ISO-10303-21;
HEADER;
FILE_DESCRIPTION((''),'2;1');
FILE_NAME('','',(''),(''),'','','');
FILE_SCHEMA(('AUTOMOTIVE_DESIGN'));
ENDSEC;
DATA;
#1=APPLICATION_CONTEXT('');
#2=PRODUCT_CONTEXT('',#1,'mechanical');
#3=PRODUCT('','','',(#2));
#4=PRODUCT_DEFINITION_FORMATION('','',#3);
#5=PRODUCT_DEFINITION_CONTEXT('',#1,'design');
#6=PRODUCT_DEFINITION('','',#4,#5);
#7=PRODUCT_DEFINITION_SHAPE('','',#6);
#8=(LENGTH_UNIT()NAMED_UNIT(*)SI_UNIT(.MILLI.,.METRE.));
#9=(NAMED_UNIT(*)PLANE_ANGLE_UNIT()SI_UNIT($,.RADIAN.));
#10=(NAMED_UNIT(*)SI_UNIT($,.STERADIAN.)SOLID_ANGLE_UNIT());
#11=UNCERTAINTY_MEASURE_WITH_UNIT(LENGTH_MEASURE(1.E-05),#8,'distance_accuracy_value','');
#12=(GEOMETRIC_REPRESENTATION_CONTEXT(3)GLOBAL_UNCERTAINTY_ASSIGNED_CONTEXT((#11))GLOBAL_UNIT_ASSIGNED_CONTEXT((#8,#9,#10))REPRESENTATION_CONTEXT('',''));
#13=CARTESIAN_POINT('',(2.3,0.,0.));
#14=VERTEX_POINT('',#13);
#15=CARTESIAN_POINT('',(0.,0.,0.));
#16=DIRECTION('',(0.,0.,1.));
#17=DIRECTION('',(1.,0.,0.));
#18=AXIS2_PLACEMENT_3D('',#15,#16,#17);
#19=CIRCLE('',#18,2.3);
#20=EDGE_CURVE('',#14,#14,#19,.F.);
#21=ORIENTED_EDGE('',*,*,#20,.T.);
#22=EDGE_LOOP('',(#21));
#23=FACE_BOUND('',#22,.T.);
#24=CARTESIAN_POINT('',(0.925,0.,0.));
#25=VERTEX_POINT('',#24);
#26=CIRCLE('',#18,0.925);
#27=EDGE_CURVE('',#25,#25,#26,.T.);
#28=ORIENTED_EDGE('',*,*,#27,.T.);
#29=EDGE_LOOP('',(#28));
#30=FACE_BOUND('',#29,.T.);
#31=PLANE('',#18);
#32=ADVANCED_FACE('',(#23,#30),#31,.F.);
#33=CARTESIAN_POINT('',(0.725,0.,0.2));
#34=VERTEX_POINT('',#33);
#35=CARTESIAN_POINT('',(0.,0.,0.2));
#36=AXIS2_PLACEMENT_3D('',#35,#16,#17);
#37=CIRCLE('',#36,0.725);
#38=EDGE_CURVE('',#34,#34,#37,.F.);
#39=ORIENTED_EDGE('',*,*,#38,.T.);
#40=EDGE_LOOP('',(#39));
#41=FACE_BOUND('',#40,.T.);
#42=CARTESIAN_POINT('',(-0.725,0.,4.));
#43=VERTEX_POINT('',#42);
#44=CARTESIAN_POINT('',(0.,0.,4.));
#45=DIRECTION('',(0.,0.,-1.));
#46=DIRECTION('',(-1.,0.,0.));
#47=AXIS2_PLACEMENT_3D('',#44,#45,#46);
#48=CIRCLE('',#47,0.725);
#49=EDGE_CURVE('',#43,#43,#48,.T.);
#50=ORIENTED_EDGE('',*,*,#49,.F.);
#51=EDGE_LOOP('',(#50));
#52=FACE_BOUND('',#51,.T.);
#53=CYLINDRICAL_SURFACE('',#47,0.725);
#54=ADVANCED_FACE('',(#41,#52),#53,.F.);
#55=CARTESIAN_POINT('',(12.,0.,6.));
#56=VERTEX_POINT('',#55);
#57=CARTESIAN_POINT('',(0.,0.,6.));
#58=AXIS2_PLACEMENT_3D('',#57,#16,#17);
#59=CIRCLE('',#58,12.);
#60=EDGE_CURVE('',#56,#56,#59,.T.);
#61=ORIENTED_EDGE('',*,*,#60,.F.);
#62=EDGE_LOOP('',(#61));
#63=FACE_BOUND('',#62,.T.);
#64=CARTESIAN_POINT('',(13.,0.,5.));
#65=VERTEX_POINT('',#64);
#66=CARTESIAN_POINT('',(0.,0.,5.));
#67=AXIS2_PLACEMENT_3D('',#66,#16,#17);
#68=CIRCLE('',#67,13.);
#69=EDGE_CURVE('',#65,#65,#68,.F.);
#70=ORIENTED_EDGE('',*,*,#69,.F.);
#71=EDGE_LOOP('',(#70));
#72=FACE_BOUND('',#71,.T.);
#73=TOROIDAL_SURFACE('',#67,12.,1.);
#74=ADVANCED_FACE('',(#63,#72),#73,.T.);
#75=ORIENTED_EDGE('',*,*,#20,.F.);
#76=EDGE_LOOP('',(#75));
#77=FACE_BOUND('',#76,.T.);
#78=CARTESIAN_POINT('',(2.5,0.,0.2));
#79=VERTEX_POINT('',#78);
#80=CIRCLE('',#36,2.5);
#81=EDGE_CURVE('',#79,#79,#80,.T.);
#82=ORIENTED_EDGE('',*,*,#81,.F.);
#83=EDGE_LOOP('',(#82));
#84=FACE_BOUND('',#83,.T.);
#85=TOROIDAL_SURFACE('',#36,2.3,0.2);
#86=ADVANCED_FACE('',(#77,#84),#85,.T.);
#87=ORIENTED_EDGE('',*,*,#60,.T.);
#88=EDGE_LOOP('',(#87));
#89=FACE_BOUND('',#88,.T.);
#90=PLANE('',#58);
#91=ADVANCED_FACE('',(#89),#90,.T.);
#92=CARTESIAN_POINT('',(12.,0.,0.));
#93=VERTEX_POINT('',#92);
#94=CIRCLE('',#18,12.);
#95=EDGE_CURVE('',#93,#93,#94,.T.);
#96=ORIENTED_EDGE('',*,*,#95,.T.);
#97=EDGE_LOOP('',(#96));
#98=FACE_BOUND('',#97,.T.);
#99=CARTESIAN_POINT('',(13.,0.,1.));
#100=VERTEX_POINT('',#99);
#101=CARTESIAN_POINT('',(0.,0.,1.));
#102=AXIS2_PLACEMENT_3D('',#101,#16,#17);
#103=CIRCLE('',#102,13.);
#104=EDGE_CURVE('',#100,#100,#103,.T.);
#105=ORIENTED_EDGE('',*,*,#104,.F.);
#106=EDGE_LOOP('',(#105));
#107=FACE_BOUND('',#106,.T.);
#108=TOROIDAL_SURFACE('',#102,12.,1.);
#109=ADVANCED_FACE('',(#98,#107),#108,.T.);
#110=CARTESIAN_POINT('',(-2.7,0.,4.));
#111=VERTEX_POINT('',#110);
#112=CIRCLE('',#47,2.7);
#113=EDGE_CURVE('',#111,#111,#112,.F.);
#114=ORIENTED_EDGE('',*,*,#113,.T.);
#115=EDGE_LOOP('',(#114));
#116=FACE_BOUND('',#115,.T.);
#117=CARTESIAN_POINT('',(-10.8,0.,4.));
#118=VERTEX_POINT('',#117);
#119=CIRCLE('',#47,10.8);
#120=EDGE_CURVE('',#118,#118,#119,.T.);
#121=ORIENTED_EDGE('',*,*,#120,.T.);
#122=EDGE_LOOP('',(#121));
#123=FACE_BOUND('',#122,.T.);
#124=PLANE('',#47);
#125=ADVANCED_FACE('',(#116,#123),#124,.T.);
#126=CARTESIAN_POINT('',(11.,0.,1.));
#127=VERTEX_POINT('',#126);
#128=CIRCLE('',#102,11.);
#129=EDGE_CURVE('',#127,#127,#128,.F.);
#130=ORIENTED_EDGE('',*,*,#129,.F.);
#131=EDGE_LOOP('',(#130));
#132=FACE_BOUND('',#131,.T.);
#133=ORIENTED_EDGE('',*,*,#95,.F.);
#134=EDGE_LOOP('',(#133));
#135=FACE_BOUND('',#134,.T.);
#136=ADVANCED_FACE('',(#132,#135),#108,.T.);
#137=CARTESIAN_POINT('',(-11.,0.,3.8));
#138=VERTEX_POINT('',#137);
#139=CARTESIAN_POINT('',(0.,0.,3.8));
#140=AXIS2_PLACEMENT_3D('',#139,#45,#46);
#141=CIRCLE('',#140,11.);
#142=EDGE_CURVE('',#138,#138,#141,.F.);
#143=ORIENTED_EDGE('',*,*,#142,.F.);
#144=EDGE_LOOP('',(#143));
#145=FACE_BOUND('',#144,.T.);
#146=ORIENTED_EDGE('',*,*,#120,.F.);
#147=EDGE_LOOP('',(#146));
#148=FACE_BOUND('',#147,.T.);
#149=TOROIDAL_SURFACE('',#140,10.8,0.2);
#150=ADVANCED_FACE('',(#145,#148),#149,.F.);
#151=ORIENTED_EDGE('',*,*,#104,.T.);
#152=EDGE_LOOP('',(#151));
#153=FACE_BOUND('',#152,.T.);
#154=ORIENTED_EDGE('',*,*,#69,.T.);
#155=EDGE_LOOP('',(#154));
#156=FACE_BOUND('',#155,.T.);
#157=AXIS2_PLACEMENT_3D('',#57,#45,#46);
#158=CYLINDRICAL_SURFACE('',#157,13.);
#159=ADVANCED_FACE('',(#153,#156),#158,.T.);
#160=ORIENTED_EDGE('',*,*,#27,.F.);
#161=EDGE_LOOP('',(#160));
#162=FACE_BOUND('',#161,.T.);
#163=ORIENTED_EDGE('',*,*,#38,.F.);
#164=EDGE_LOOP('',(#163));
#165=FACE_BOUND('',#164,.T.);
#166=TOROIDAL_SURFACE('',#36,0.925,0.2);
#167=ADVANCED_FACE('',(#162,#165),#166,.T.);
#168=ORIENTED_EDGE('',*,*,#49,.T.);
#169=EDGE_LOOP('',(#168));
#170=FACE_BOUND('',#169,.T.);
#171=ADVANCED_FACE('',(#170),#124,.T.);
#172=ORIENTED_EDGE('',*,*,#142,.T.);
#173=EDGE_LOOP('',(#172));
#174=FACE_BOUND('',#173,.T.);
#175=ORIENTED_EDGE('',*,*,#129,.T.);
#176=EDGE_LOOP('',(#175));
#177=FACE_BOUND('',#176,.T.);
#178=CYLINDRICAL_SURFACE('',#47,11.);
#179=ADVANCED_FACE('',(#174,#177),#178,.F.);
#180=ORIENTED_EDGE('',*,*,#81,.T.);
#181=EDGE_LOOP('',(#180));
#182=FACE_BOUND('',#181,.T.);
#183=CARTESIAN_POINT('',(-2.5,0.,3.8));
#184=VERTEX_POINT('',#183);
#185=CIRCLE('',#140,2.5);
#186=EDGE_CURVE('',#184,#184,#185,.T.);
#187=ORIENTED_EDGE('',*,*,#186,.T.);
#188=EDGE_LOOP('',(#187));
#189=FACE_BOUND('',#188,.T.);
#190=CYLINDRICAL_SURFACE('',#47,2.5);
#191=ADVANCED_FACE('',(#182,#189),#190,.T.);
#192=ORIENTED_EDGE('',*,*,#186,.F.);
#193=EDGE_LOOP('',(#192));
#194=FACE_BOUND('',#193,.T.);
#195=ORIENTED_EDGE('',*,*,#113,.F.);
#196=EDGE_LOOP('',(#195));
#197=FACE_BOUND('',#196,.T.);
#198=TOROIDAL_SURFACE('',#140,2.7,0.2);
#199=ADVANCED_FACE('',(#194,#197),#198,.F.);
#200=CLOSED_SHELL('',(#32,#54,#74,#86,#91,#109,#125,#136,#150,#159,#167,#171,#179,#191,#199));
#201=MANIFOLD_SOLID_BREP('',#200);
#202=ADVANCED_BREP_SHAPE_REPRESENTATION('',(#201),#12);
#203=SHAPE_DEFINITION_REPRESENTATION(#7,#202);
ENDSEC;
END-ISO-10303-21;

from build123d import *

# Parameters (mm, degrees)
SKETCH_1_R          = 13
EXTRUDE_1_DEPTH     = 6
SKETCH_2_R          = 0.725
CUT_EXTRUDE_1_DEPTH = 4
SKETCH_3_R          = 11
SKETCH_3_R_2        = 2.5
CUT_EXTRUDE_2_DEPTH = 4
FILLET_1_R          = 1
FILLET_2_R          = 1
FILLET_3_R          = 0.2
FILLET_4_R          = 0.2


with BuildPart() as part:
    # Эскиз1 → Бобышка-Вытянуть1 (new body)
    with BuildSketch(Plane.XY):
        Circle(SKETCH_1_R)
    extrude(amount=EXTRUDE_1_DEPTH)

    # Эскиз2 → Вырез-Вытянуть1 (cut)
    with BuildSketch(Plane(origin=(0, 0, 0), x_dir=(-1, 0, 0), z_dir=(0, 0, -1))):
        Circle(SKETCH_2_R)
    extrude(amount=-CUT_EXTRUDE_1_DEPTH, mode=Mode.SUBTRACT)

    # Эскиз3 → Вырез-Вытянуть2 (cut)
    with BuildSketch(Plane(origin=(0, 0, 0), x_dir=(-1, 0, 0), z_dir=(0, 0, -1))):
        Circle(SKETCH_3_R)
        Circle(SKETCH_3_R_2, mode=Mode.SUBTRACT)
    extrude(amount=-CUT_EXTRUDE_2_DEPTH, mode=Mode.SUBTRACT)

    # Скругление1
    fillet_1_edges = [part.edges().sort_by_distance(p)[0] for p in [
        (11, 0, 0),
        (-13, 0, 0),
    ]]
    fillet(fillet_1_edges, radius=FILLET_1_R - 0.0001)  # a hair under: the kernel refuses the full size

    # Скругление2
    fillet_2_edges = [part.edges().sort_by_distance(p)[0] for p in [
        (-13, 0, 6),
    ]]
    fillet(fillet_2_edges, radius=FILLET_2_R)

    # Скругление3
    fillet_3_edges = [part.edges().sort_by_distance(p)[0] for p in [
        (2.5, 0, 0),
        (0.725, 0, 0),
    ]]
    fillet(fillet_3_edges, radius=FILLET_3_R)

    # Скругление4
    fillet_4_edges = [part.edges().sort_by_distance(p)[0] for p in [
        (11, 0, 4),
        (2.5, 0, 4),
    ]]
    fillet(fillet_4_edges, radius=FILLET_4_R)


solid = part.part
